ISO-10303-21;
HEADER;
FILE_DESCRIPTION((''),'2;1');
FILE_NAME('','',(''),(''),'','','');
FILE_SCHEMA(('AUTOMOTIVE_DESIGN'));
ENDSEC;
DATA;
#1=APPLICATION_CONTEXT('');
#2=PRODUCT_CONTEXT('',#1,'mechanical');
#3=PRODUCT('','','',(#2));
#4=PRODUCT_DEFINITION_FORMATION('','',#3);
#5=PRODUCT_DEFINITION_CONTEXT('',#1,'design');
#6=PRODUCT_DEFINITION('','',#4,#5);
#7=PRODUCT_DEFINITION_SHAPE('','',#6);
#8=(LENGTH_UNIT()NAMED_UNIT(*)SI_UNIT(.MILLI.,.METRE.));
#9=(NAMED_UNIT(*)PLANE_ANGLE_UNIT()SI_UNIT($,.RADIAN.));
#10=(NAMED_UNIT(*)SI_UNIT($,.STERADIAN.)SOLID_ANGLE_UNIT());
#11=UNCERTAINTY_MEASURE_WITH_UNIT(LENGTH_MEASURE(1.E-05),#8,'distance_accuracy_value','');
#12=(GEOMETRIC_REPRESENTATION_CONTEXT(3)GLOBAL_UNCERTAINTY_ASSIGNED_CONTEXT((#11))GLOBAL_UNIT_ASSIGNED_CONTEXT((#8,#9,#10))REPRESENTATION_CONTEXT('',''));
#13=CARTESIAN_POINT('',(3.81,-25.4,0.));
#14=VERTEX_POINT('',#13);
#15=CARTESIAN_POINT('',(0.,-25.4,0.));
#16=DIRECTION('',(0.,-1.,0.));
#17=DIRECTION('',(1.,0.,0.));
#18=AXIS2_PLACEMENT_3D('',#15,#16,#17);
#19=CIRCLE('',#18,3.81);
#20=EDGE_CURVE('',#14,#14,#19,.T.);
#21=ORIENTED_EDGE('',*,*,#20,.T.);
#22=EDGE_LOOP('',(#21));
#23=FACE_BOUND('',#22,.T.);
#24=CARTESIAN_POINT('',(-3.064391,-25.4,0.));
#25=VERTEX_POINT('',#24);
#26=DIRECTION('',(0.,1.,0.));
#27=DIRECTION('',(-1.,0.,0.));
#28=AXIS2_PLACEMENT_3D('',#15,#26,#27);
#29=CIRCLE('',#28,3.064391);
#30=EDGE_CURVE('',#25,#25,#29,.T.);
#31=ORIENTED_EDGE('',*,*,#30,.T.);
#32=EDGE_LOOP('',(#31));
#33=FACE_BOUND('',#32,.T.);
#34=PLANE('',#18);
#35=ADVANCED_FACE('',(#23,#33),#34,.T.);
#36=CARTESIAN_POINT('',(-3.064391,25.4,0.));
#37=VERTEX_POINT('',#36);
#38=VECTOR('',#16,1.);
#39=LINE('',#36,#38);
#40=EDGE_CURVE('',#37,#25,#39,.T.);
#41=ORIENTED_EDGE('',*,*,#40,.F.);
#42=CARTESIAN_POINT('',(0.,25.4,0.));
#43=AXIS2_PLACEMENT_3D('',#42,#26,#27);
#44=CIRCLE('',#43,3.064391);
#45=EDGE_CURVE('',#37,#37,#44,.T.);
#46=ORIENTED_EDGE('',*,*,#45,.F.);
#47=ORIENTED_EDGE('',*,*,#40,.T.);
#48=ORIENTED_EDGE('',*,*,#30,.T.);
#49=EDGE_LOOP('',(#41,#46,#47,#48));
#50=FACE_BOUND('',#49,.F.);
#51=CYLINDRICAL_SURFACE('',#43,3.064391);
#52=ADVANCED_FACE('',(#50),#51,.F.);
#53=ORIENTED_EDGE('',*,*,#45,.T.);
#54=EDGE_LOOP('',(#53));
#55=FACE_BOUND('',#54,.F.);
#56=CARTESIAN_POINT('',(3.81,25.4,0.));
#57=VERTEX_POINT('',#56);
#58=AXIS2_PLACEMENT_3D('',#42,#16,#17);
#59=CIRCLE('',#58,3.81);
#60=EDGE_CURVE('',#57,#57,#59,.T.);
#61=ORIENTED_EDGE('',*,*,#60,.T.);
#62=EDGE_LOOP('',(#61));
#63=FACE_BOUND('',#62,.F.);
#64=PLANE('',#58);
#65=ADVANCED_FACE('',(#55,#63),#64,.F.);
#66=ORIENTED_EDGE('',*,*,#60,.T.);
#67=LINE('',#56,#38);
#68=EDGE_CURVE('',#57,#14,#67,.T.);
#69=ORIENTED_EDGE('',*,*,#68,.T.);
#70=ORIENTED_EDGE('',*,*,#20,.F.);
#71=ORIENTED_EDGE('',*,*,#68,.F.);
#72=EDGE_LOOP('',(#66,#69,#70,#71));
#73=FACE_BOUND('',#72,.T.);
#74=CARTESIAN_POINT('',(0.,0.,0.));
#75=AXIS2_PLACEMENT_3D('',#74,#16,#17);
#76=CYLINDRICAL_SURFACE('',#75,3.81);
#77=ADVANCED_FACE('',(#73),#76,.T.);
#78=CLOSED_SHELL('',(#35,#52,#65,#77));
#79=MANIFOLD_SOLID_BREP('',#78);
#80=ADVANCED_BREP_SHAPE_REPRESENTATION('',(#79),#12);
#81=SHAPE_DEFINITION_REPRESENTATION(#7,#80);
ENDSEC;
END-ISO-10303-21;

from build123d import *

# Parameters (mm, degrees)
F0_R     = 3.81
F1_DEPTH = 25.4
F3_DEPTH = 25.4
F4_R     = 3.0643911348
F5_DEPTH = 50.801


# Not quite as in the source:
# - the program builds the solid bodies; features that only make, move or delete a surface that nothing else refers to are left out


with BuildPart() as f1:
    # F0 (on Front) → F1 (new body)
    with BuildSketch(Plane.XZ):
        Circle(F0_R)
    extrude(amount=F1_DEPTH)

    # F3 (add): a face of the model
    f3_faces = [f1.faces().sort_by_distance(p)[0] for p in [
        (0, 0, 0),
    ]]
    extrude(f3_faces, amount=F3_DEPTH)

    # F4 (on face) → F5 (cut, through all)
    with BuildSketch(Plane(origin=(0, 25.4, 0), x_dir=(-1, 0, 0), z_dir=(0, 1, 0))):
        Circle(F4_R)
    extrude(amount=-F5_DEPTH, mode=Mode.SUBTRACT)


solid = f1.part
